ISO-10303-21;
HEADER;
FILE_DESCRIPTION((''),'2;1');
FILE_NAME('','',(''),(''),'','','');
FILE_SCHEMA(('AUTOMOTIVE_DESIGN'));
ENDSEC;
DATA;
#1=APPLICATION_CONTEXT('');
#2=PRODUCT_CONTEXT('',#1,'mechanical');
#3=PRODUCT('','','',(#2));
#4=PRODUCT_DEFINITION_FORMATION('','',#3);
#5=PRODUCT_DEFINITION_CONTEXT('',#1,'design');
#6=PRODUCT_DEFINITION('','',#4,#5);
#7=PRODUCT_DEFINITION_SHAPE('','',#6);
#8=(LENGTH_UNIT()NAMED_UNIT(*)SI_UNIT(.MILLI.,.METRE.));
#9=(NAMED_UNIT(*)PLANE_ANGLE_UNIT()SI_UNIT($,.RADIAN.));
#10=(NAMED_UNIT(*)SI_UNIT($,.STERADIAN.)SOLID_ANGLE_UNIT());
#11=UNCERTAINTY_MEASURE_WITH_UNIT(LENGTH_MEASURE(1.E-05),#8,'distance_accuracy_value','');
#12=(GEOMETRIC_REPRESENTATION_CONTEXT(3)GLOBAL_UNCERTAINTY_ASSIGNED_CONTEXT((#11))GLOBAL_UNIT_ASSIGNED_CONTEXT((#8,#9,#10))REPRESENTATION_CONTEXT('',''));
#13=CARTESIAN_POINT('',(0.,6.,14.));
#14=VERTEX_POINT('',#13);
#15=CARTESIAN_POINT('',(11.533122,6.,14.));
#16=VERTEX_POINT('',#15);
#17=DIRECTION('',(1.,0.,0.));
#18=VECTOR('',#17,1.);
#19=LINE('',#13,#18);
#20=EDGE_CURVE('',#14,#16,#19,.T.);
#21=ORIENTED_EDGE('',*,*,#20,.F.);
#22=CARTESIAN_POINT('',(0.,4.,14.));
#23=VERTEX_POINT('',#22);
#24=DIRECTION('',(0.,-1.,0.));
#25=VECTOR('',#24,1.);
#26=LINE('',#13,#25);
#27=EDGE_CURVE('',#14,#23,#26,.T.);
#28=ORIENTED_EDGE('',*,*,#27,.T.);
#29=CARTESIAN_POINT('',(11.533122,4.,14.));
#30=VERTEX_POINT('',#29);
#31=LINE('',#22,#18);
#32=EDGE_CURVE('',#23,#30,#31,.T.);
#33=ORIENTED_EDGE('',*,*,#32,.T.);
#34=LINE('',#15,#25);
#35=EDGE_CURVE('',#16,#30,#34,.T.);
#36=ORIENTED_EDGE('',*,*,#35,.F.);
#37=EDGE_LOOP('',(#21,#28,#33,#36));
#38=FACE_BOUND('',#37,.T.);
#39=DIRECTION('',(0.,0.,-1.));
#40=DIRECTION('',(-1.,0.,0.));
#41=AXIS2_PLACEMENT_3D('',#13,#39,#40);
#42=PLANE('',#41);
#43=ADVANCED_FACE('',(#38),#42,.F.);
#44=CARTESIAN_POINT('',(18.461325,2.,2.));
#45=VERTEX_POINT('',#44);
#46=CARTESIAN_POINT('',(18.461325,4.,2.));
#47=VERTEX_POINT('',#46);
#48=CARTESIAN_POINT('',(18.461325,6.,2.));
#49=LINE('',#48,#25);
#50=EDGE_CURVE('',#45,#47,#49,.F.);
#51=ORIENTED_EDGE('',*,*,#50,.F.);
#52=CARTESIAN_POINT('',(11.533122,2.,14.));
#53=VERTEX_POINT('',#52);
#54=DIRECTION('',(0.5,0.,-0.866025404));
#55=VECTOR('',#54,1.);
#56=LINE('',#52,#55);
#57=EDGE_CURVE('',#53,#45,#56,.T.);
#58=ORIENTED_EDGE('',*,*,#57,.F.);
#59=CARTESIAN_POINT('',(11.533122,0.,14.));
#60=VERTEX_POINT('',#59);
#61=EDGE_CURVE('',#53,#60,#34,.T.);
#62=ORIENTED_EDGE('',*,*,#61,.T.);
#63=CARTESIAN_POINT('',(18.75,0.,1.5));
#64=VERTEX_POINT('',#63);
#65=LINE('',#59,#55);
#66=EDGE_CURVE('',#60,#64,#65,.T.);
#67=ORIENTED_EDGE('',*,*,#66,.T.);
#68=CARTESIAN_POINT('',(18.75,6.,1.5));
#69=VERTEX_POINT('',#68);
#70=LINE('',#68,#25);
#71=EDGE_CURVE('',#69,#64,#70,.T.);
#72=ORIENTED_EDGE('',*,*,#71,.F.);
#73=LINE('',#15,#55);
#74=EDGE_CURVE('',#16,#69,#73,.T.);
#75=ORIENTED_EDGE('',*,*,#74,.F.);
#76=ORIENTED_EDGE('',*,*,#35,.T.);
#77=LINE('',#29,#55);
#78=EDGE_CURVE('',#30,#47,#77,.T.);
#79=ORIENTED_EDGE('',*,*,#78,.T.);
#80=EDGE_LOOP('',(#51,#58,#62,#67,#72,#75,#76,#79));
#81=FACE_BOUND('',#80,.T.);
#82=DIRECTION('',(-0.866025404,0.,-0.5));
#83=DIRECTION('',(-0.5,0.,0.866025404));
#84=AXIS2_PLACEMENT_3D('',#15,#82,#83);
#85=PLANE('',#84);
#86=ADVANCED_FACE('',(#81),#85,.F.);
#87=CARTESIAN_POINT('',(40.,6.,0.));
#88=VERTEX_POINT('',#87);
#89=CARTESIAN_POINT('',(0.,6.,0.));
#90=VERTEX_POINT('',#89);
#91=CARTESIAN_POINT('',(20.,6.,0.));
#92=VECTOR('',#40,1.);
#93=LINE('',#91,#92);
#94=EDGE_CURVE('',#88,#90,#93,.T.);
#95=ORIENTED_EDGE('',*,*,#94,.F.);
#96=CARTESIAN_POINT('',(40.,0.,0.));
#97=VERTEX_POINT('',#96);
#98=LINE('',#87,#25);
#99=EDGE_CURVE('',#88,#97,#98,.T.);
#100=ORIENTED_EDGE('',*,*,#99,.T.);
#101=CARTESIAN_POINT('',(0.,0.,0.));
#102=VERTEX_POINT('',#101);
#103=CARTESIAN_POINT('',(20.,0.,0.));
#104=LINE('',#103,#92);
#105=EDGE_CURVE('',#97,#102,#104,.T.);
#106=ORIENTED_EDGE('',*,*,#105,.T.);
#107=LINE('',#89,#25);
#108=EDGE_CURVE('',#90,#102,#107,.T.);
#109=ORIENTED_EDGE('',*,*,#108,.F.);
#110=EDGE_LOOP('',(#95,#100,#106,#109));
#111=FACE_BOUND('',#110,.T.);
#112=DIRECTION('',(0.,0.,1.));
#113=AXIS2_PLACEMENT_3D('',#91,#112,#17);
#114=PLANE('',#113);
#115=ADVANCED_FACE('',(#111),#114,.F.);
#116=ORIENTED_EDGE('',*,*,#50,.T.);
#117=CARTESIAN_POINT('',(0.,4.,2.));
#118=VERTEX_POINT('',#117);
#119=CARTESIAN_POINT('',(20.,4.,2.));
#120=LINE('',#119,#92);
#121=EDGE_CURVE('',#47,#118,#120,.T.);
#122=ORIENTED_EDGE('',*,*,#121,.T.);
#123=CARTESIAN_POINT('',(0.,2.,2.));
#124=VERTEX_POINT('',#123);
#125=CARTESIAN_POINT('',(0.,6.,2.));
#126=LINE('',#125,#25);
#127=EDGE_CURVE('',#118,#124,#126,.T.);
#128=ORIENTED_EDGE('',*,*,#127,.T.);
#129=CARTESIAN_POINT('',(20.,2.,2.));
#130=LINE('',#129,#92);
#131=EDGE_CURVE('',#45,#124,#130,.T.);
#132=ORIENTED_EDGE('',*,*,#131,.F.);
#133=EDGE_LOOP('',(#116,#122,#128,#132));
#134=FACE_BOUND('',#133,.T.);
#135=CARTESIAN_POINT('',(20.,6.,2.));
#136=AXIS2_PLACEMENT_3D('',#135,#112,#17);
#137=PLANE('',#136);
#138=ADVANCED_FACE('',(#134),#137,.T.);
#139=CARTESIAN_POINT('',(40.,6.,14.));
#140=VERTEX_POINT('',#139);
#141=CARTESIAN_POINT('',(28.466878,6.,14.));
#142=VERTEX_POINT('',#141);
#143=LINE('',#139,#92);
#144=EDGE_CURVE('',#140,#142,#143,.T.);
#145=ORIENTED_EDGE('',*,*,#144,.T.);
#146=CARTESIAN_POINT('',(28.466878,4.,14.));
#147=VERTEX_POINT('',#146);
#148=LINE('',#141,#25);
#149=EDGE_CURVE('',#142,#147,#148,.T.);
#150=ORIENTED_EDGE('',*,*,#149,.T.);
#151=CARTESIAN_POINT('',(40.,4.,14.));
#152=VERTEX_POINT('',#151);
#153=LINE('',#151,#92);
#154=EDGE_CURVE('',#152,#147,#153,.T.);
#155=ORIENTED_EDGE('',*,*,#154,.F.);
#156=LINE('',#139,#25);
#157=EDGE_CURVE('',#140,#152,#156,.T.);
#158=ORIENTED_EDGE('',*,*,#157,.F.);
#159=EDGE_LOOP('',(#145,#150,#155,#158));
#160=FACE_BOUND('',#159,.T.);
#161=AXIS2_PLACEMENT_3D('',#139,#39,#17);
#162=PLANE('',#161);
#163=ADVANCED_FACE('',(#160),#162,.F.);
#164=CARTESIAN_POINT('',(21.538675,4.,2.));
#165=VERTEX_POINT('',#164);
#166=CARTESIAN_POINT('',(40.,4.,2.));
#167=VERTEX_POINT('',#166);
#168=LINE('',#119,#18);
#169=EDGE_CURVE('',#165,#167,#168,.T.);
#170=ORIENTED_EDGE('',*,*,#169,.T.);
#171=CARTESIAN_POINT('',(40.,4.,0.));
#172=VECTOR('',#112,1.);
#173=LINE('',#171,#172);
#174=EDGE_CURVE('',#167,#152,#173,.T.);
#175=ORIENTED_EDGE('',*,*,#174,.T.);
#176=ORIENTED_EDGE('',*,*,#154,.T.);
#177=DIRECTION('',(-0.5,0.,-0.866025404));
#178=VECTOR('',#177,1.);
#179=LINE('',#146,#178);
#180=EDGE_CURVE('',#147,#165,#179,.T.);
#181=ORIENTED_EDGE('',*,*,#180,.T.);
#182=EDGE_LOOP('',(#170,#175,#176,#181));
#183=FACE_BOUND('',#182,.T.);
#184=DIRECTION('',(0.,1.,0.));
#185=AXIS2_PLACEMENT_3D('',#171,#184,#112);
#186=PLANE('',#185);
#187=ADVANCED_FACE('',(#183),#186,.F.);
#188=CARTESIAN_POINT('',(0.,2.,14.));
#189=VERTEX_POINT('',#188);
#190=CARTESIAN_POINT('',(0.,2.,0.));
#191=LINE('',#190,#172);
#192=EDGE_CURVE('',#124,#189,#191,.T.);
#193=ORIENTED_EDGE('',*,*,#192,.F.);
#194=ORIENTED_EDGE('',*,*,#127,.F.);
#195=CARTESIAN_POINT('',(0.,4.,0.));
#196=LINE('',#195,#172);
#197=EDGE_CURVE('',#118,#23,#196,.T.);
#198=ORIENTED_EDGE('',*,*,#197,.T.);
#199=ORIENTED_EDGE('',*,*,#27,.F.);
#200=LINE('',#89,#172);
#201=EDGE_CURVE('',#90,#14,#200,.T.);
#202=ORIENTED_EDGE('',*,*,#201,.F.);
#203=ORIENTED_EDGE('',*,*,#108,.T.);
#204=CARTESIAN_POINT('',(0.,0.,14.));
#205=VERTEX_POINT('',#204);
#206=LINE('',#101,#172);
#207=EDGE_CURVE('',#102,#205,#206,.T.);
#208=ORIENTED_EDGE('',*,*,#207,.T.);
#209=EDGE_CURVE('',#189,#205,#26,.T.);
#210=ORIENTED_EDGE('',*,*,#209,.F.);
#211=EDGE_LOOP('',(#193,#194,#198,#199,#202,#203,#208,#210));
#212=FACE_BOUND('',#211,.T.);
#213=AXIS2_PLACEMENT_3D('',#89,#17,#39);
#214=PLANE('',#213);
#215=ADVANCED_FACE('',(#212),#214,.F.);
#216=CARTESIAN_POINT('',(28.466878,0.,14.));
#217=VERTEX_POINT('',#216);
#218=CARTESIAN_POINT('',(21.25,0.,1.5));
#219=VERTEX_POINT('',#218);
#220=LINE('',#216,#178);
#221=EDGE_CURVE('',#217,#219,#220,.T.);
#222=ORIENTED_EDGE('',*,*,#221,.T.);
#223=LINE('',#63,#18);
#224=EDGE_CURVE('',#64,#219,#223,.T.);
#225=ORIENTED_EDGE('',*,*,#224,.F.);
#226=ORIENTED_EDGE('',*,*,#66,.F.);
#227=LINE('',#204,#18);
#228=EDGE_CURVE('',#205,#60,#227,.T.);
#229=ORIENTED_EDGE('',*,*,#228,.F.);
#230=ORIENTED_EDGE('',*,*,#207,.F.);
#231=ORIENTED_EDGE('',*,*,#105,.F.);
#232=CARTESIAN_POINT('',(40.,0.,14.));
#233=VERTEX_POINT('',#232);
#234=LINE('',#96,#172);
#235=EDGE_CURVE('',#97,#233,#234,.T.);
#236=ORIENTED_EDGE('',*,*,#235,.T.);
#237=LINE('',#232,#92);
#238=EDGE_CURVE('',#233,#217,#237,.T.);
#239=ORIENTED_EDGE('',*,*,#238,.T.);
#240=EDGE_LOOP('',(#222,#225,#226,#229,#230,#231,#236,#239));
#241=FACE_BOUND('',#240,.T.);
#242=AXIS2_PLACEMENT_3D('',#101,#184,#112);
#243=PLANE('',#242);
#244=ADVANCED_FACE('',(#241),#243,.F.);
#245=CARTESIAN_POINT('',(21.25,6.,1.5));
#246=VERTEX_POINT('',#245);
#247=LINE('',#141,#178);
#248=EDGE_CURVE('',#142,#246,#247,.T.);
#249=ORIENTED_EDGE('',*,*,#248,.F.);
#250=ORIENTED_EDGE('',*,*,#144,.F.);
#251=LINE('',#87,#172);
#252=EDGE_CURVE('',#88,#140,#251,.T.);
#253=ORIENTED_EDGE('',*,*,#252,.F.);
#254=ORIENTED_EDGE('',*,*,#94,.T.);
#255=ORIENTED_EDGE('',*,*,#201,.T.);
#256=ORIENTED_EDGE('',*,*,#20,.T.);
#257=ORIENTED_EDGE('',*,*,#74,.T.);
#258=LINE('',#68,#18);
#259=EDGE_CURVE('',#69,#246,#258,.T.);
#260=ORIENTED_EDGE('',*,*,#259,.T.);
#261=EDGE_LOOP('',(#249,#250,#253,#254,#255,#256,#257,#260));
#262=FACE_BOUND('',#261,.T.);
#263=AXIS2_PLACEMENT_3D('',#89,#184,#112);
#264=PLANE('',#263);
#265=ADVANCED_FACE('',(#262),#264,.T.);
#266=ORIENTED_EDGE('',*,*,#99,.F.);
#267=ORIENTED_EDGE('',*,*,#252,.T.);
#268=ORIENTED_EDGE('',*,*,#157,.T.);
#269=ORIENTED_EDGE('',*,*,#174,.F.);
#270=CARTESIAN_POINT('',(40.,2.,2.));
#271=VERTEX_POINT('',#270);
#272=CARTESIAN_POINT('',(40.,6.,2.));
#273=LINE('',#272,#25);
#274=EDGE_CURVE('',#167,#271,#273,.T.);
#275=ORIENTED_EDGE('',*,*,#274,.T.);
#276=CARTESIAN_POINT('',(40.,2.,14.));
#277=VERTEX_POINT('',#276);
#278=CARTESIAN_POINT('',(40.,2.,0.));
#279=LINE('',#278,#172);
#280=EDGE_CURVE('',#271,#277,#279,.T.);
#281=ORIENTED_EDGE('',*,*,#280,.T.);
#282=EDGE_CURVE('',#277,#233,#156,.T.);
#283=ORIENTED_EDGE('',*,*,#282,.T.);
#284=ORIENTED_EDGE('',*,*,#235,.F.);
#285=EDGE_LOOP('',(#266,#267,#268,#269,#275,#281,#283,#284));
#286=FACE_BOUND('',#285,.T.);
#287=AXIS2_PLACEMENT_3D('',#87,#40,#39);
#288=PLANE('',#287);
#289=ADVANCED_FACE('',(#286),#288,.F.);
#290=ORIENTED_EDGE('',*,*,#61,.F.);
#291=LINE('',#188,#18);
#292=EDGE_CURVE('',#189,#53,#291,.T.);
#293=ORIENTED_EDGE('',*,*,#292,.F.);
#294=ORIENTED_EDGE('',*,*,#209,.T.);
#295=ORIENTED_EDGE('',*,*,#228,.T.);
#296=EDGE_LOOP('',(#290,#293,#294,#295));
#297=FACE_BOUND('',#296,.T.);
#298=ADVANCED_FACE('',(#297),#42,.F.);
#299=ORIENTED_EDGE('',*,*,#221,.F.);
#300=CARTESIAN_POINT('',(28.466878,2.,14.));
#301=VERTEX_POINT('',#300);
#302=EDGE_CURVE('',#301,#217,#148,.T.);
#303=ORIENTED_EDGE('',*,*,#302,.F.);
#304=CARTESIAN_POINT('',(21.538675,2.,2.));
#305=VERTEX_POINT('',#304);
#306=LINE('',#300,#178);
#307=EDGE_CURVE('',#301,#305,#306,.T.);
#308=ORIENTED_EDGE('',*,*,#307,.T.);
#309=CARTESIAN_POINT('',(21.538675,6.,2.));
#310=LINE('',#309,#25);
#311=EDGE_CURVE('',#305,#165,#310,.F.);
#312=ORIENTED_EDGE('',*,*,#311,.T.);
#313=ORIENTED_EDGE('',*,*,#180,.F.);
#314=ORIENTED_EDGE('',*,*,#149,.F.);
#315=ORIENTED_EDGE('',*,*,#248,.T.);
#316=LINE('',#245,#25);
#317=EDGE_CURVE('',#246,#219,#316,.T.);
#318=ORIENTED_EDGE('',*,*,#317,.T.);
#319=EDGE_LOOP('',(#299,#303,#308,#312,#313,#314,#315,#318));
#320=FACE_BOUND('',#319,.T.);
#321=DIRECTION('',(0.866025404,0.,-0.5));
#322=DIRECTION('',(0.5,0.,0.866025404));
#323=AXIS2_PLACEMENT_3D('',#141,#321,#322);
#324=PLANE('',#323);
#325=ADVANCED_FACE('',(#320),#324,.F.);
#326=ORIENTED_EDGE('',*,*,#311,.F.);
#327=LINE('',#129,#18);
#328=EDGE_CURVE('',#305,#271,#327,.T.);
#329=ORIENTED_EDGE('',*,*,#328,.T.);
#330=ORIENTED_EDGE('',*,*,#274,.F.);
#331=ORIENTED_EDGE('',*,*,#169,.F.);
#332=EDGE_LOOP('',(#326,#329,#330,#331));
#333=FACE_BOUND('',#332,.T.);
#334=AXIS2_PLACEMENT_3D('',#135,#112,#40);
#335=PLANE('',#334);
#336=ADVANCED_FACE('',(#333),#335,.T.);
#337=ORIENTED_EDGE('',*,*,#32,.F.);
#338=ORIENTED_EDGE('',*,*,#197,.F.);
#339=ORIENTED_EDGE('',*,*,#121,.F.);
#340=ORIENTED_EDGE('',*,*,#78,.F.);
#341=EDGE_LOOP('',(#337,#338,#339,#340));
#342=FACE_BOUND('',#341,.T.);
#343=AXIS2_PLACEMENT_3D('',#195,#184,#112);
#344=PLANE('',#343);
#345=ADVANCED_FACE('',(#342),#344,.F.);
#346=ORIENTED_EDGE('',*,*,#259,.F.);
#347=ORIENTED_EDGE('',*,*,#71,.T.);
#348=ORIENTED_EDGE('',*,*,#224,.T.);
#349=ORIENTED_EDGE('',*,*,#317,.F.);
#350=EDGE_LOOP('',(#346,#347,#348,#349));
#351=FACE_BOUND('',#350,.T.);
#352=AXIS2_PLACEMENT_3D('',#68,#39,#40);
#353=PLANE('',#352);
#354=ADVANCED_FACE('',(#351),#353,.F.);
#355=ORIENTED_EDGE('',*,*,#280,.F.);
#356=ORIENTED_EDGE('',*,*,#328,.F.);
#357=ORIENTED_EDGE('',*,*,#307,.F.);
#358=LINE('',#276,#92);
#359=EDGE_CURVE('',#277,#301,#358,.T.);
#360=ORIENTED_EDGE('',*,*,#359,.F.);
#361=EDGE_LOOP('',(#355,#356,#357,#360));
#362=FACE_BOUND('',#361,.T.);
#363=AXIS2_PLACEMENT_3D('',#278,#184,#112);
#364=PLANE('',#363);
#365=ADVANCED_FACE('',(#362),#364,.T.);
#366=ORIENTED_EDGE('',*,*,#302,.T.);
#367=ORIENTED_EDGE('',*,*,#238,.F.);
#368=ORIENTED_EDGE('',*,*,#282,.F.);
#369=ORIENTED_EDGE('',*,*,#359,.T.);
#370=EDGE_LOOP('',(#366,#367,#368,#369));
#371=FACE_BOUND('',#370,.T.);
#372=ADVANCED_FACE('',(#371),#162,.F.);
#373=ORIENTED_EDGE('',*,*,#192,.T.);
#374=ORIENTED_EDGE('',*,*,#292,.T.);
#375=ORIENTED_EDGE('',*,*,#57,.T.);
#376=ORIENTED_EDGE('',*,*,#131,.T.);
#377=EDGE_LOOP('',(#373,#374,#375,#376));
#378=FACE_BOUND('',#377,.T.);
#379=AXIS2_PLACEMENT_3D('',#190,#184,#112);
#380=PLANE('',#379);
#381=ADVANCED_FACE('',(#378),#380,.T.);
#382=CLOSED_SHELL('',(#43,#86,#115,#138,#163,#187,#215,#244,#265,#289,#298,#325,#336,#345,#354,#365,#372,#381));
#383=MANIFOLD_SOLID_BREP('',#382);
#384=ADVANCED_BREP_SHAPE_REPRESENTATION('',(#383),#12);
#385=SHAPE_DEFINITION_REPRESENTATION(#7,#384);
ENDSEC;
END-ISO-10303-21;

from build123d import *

# Parameters (mm, degrees)
BOSS_EXTRUDE1_DEPTH = 6
SHELL2_START        = 2
SHELL2_OUTLINE_W    = 20
SHELL2_OUTLINE_H    = 2
SHELL2_DEPTH        = 12


# Read off the part's stored shape, not the designer's step: Shell2
with BuildPart() as part:
    # Sketch1 → Boss-Extrude1 (new body)
    with BuildSketch(Plane(origin=(0, 0, 0), x_dir=(1, 0, 0), z_dir=(0, 1, 0))):
        Polygon((0, 0), (0, -14), (11.533121635, -14), (18.75, -1.5), (20, -1.5), (20, 0), align=None)
    extrude(amount=BOSS_EXTRUDE1_DEPTH)

    # Shell2 outline → Shell2 (cut)
    with BuildSketch(Plane.XY.offset(SHELL2_START)):
        with Locations((10, 3)):
            Rectangle(SHELL2_OUTLINE_W, SHELL2_OUTLINE_H)
    extrude(amount=SHELL2_DEPTH, mode=Mode.SUBTRACT)

    # Mirror1: part across plane


with BuildPart() as part_1:
    add(part.part)
    add(part.part.mirror(Plane(origin=(20, 0, 0), x_dir=(0, 0, 1), z_dir=(1, 0, 0))))


solid = part_1.part
